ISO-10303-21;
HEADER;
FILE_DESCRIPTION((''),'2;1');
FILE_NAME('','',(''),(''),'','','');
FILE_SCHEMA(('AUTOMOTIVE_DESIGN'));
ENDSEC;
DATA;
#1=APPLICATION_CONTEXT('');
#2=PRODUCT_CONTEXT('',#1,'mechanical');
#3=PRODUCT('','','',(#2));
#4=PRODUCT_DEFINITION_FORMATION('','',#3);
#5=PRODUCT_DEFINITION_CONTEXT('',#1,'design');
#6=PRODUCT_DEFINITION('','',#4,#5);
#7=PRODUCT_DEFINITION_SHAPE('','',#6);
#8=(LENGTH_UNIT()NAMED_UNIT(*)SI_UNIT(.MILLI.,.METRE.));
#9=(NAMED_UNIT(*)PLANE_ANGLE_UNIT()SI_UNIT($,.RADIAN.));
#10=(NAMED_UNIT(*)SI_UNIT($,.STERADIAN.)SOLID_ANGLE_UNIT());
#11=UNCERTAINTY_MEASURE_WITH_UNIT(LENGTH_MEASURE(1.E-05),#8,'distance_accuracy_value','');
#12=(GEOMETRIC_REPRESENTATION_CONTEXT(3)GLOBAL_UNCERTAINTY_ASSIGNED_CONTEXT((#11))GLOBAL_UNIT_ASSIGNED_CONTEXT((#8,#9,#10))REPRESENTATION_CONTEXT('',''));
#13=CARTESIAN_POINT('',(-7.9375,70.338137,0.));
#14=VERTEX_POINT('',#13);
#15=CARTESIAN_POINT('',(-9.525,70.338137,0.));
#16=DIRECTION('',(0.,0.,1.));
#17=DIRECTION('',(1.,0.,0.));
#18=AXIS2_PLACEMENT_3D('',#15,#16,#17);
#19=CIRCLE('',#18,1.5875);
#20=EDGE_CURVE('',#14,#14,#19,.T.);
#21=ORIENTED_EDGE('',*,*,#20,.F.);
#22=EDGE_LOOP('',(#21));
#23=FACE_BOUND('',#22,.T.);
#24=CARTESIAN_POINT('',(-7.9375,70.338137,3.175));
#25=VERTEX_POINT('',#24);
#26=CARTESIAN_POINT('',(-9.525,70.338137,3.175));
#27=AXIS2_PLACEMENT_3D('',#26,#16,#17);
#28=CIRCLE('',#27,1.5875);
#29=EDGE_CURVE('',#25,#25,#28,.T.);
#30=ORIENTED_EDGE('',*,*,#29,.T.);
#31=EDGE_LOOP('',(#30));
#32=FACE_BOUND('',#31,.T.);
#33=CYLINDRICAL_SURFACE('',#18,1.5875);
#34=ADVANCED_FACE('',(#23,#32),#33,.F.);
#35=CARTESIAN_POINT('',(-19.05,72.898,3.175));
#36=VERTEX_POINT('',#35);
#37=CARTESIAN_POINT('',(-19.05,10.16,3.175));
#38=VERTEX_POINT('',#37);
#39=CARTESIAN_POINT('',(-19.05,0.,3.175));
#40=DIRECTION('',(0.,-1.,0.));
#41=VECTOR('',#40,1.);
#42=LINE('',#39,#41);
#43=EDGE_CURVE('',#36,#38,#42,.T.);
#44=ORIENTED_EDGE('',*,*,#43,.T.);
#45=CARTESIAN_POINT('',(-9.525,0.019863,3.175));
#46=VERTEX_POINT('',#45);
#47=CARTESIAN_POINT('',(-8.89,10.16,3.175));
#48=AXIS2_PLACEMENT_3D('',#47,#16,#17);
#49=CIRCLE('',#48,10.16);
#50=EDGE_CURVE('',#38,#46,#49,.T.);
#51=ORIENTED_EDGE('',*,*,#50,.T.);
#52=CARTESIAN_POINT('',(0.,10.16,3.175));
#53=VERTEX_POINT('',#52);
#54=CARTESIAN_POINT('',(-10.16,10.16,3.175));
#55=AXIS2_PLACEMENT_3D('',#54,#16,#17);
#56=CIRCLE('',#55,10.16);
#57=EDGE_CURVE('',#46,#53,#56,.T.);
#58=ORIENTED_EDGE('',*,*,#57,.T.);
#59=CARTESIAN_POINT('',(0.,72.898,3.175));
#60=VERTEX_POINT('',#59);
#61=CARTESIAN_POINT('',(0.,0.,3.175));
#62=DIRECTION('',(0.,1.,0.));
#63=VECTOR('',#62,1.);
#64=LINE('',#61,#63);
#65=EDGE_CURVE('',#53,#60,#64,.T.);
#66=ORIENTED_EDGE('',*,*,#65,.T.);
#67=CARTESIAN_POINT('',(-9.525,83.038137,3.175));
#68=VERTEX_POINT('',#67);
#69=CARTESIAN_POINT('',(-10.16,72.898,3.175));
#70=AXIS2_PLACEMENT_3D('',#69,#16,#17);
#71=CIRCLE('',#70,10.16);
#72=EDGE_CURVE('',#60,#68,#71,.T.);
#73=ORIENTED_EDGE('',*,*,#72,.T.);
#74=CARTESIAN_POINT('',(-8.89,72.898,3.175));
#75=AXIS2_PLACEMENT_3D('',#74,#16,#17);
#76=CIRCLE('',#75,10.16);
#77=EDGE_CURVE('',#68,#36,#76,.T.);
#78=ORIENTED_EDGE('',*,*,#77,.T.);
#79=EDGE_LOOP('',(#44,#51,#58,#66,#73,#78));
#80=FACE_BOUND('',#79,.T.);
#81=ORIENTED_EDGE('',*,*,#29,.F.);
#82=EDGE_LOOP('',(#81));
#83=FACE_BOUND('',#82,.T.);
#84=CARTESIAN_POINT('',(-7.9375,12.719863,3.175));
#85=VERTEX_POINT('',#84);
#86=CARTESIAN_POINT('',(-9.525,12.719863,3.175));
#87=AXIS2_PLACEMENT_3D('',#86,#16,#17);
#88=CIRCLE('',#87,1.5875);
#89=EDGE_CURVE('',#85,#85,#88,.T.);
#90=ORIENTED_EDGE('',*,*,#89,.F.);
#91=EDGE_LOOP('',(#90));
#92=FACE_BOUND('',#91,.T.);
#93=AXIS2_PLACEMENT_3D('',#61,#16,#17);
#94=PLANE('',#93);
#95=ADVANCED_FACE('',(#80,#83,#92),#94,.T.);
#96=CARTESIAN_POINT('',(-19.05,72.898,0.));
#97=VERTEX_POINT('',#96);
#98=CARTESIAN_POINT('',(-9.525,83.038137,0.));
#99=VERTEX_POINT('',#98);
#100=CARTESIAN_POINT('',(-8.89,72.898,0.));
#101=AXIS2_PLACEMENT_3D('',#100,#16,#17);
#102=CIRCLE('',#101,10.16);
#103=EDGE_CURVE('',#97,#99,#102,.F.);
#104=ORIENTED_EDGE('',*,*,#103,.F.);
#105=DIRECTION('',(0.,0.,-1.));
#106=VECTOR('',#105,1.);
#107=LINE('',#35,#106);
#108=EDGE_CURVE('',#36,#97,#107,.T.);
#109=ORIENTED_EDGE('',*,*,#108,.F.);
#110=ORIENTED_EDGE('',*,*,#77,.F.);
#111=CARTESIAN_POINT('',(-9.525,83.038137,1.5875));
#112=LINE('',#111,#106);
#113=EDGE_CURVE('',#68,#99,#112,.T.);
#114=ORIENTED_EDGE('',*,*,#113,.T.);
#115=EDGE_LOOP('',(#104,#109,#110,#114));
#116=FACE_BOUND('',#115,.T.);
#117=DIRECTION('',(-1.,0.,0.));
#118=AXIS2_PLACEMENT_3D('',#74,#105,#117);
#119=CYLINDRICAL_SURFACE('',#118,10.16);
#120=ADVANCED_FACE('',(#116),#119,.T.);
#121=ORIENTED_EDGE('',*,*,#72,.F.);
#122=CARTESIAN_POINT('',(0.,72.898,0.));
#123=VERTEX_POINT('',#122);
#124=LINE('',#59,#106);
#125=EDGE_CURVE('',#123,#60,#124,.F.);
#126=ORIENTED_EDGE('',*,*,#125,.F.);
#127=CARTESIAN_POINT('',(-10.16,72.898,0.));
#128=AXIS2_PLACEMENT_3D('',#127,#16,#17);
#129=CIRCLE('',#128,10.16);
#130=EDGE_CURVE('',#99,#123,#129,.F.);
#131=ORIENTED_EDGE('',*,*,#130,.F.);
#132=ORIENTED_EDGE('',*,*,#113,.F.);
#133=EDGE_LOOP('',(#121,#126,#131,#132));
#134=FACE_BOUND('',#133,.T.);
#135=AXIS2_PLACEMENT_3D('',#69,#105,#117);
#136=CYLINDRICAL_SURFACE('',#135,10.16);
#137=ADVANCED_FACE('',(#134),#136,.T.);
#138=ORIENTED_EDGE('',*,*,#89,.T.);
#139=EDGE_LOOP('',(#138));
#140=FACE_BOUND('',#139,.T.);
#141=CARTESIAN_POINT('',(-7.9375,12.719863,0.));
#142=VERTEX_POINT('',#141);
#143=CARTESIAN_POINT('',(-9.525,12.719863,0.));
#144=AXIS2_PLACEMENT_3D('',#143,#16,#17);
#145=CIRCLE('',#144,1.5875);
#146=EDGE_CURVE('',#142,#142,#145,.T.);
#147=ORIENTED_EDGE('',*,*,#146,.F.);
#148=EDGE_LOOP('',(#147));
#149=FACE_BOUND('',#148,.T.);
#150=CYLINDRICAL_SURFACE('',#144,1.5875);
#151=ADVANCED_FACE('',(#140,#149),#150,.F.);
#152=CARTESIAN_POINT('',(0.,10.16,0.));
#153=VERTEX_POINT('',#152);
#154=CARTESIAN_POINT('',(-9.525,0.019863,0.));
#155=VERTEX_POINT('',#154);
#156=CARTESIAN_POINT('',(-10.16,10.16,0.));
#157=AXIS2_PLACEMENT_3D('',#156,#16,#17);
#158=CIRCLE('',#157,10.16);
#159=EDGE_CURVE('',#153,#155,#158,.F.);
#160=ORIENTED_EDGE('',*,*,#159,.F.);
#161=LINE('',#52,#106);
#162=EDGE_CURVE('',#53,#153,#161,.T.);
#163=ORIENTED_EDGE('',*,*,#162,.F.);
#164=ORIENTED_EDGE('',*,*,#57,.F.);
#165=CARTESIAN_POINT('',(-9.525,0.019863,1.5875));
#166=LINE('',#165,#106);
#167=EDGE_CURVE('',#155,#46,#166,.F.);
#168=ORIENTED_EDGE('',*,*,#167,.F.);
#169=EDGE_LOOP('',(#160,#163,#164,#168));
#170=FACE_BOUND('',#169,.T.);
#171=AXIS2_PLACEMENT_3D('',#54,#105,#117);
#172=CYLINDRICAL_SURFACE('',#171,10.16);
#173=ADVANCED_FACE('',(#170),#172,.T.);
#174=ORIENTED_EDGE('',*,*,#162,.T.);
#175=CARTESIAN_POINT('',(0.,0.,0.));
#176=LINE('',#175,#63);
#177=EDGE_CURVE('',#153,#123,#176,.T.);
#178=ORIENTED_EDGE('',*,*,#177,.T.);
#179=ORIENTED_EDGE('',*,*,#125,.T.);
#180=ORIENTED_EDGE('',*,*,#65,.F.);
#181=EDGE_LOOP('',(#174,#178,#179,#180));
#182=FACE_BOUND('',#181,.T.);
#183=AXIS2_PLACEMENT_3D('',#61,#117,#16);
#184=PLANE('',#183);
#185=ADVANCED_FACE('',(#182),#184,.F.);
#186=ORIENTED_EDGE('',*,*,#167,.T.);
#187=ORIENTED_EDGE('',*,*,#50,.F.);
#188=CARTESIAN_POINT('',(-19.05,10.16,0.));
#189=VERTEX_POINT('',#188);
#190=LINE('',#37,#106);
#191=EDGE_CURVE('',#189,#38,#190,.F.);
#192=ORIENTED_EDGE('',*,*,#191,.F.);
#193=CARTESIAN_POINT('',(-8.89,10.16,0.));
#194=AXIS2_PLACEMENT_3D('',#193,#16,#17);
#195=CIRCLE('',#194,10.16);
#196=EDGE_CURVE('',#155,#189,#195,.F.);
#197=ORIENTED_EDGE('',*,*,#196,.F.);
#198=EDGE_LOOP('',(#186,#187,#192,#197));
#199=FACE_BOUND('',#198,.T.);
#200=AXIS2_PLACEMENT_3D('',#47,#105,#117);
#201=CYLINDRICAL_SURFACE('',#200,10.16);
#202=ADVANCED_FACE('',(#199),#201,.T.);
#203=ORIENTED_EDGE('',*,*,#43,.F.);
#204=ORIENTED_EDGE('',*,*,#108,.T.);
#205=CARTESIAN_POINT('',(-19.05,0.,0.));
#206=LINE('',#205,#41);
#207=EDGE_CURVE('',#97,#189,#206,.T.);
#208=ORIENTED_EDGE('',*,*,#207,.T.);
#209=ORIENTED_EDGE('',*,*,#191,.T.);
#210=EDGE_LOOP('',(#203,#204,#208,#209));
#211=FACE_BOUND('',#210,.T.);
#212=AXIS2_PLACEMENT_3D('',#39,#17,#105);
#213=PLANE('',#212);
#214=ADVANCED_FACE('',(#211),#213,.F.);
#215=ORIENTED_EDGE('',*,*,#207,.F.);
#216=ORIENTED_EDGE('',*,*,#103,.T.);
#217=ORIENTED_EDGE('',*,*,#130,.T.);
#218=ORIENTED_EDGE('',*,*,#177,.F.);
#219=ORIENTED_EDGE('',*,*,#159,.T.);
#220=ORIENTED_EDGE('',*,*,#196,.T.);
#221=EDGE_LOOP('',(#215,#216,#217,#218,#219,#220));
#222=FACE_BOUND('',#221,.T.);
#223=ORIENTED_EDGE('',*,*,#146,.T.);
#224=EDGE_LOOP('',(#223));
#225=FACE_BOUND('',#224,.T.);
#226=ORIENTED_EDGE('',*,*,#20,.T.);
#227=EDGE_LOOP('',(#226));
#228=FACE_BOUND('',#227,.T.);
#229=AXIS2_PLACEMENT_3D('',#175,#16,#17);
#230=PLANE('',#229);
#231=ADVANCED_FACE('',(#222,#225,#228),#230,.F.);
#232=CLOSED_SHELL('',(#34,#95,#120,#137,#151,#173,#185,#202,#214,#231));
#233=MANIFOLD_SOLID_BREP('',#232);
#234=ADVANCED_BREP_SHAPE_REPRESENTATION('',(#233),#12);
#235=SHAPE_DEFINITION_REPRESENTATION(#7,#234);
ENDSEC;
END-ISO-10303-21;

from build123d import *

# Parameters (mm, degrees)
SKETCH2_W           = 19.05
SKETCH2_H           = 83.058
BOSS_EXTRUDE1_DEPTH = 3.175
FILLET1_R           = 10.16
SKETCH3_R           = 1.5875
CUT_EXTRUDE1_DEPTH  = 3.175


with BuildPart() as part:
    # Sketch2 → Boss-Extrude1 (new body)
    with BuildSketch(Plane.XY):
        with Locations((-9.525, 41.529)):
            Rectangle(SKETCH2_W, SKETCH2_H)
    extrude(amount=BOSS_EXTRUDE1_DEPTH)

    # Fillet1
    # the kernel refuses this fillet: 10.16 mm, written as the material it takes off along each edge
    with BuildSketch(Plane(origin=(-19.05, 0, -25.4), x_dir=(1, 0, 0), z_dir=(0, 0, 1)), Plane(origin=(-19.05, 83.058, -25.4), x_dir=(0, -1, 0), z_dir=(0, 0, 1)), Plane(origin=(0, 83.058, -25.4), x_dir=(-1, 0, 0), z_dir=(0, 0, 1))) as fillet1_piece_1:
        with BuildLine():
            CenterArc((FILLET1_R, FILLET1_R), FILLET1_R, 180, 90)
            Line((0, FILLET1_R), (0, 0))
            Line((0, 0), (FILLET1_R, 0))
        make_face()
    extrude(amount=53.975, mode=Mode.SUBTRACT)
    with BuildSketch(Plane(origin=(0, 0, -25.4), x_dir=(-1, 0, 0), z_dir=(0, 0, 1))) as fillet1_piece_2:
        with BuildLine():
            CenterArc((FILLET1_R, -FILLET1_R), FILLET1_R, 90, 90)
            Line((0, -FILLET1_R), (0, 0))
            Line((0, 0), (FILLET1_R, 0))
        make_face()
    extrude(amount=53.975, mode=Mode.SUBTRACT)

    # Sketch3 → Cut-Extrude1 (cut)
    with BuildSketch(Plane.XY.offset(3.175)):
        with Locations((-9.525, 12.719863167)):
            Circle(SKETCH3_R)
        with Locations((-9.525, 70.338136833)):
            Circle(SKETCH3_R)
    extrude(amount=-CUT_EXTRUDE1_DEPTH, mode=Mode.SUBTRACT)


solid = part.part
